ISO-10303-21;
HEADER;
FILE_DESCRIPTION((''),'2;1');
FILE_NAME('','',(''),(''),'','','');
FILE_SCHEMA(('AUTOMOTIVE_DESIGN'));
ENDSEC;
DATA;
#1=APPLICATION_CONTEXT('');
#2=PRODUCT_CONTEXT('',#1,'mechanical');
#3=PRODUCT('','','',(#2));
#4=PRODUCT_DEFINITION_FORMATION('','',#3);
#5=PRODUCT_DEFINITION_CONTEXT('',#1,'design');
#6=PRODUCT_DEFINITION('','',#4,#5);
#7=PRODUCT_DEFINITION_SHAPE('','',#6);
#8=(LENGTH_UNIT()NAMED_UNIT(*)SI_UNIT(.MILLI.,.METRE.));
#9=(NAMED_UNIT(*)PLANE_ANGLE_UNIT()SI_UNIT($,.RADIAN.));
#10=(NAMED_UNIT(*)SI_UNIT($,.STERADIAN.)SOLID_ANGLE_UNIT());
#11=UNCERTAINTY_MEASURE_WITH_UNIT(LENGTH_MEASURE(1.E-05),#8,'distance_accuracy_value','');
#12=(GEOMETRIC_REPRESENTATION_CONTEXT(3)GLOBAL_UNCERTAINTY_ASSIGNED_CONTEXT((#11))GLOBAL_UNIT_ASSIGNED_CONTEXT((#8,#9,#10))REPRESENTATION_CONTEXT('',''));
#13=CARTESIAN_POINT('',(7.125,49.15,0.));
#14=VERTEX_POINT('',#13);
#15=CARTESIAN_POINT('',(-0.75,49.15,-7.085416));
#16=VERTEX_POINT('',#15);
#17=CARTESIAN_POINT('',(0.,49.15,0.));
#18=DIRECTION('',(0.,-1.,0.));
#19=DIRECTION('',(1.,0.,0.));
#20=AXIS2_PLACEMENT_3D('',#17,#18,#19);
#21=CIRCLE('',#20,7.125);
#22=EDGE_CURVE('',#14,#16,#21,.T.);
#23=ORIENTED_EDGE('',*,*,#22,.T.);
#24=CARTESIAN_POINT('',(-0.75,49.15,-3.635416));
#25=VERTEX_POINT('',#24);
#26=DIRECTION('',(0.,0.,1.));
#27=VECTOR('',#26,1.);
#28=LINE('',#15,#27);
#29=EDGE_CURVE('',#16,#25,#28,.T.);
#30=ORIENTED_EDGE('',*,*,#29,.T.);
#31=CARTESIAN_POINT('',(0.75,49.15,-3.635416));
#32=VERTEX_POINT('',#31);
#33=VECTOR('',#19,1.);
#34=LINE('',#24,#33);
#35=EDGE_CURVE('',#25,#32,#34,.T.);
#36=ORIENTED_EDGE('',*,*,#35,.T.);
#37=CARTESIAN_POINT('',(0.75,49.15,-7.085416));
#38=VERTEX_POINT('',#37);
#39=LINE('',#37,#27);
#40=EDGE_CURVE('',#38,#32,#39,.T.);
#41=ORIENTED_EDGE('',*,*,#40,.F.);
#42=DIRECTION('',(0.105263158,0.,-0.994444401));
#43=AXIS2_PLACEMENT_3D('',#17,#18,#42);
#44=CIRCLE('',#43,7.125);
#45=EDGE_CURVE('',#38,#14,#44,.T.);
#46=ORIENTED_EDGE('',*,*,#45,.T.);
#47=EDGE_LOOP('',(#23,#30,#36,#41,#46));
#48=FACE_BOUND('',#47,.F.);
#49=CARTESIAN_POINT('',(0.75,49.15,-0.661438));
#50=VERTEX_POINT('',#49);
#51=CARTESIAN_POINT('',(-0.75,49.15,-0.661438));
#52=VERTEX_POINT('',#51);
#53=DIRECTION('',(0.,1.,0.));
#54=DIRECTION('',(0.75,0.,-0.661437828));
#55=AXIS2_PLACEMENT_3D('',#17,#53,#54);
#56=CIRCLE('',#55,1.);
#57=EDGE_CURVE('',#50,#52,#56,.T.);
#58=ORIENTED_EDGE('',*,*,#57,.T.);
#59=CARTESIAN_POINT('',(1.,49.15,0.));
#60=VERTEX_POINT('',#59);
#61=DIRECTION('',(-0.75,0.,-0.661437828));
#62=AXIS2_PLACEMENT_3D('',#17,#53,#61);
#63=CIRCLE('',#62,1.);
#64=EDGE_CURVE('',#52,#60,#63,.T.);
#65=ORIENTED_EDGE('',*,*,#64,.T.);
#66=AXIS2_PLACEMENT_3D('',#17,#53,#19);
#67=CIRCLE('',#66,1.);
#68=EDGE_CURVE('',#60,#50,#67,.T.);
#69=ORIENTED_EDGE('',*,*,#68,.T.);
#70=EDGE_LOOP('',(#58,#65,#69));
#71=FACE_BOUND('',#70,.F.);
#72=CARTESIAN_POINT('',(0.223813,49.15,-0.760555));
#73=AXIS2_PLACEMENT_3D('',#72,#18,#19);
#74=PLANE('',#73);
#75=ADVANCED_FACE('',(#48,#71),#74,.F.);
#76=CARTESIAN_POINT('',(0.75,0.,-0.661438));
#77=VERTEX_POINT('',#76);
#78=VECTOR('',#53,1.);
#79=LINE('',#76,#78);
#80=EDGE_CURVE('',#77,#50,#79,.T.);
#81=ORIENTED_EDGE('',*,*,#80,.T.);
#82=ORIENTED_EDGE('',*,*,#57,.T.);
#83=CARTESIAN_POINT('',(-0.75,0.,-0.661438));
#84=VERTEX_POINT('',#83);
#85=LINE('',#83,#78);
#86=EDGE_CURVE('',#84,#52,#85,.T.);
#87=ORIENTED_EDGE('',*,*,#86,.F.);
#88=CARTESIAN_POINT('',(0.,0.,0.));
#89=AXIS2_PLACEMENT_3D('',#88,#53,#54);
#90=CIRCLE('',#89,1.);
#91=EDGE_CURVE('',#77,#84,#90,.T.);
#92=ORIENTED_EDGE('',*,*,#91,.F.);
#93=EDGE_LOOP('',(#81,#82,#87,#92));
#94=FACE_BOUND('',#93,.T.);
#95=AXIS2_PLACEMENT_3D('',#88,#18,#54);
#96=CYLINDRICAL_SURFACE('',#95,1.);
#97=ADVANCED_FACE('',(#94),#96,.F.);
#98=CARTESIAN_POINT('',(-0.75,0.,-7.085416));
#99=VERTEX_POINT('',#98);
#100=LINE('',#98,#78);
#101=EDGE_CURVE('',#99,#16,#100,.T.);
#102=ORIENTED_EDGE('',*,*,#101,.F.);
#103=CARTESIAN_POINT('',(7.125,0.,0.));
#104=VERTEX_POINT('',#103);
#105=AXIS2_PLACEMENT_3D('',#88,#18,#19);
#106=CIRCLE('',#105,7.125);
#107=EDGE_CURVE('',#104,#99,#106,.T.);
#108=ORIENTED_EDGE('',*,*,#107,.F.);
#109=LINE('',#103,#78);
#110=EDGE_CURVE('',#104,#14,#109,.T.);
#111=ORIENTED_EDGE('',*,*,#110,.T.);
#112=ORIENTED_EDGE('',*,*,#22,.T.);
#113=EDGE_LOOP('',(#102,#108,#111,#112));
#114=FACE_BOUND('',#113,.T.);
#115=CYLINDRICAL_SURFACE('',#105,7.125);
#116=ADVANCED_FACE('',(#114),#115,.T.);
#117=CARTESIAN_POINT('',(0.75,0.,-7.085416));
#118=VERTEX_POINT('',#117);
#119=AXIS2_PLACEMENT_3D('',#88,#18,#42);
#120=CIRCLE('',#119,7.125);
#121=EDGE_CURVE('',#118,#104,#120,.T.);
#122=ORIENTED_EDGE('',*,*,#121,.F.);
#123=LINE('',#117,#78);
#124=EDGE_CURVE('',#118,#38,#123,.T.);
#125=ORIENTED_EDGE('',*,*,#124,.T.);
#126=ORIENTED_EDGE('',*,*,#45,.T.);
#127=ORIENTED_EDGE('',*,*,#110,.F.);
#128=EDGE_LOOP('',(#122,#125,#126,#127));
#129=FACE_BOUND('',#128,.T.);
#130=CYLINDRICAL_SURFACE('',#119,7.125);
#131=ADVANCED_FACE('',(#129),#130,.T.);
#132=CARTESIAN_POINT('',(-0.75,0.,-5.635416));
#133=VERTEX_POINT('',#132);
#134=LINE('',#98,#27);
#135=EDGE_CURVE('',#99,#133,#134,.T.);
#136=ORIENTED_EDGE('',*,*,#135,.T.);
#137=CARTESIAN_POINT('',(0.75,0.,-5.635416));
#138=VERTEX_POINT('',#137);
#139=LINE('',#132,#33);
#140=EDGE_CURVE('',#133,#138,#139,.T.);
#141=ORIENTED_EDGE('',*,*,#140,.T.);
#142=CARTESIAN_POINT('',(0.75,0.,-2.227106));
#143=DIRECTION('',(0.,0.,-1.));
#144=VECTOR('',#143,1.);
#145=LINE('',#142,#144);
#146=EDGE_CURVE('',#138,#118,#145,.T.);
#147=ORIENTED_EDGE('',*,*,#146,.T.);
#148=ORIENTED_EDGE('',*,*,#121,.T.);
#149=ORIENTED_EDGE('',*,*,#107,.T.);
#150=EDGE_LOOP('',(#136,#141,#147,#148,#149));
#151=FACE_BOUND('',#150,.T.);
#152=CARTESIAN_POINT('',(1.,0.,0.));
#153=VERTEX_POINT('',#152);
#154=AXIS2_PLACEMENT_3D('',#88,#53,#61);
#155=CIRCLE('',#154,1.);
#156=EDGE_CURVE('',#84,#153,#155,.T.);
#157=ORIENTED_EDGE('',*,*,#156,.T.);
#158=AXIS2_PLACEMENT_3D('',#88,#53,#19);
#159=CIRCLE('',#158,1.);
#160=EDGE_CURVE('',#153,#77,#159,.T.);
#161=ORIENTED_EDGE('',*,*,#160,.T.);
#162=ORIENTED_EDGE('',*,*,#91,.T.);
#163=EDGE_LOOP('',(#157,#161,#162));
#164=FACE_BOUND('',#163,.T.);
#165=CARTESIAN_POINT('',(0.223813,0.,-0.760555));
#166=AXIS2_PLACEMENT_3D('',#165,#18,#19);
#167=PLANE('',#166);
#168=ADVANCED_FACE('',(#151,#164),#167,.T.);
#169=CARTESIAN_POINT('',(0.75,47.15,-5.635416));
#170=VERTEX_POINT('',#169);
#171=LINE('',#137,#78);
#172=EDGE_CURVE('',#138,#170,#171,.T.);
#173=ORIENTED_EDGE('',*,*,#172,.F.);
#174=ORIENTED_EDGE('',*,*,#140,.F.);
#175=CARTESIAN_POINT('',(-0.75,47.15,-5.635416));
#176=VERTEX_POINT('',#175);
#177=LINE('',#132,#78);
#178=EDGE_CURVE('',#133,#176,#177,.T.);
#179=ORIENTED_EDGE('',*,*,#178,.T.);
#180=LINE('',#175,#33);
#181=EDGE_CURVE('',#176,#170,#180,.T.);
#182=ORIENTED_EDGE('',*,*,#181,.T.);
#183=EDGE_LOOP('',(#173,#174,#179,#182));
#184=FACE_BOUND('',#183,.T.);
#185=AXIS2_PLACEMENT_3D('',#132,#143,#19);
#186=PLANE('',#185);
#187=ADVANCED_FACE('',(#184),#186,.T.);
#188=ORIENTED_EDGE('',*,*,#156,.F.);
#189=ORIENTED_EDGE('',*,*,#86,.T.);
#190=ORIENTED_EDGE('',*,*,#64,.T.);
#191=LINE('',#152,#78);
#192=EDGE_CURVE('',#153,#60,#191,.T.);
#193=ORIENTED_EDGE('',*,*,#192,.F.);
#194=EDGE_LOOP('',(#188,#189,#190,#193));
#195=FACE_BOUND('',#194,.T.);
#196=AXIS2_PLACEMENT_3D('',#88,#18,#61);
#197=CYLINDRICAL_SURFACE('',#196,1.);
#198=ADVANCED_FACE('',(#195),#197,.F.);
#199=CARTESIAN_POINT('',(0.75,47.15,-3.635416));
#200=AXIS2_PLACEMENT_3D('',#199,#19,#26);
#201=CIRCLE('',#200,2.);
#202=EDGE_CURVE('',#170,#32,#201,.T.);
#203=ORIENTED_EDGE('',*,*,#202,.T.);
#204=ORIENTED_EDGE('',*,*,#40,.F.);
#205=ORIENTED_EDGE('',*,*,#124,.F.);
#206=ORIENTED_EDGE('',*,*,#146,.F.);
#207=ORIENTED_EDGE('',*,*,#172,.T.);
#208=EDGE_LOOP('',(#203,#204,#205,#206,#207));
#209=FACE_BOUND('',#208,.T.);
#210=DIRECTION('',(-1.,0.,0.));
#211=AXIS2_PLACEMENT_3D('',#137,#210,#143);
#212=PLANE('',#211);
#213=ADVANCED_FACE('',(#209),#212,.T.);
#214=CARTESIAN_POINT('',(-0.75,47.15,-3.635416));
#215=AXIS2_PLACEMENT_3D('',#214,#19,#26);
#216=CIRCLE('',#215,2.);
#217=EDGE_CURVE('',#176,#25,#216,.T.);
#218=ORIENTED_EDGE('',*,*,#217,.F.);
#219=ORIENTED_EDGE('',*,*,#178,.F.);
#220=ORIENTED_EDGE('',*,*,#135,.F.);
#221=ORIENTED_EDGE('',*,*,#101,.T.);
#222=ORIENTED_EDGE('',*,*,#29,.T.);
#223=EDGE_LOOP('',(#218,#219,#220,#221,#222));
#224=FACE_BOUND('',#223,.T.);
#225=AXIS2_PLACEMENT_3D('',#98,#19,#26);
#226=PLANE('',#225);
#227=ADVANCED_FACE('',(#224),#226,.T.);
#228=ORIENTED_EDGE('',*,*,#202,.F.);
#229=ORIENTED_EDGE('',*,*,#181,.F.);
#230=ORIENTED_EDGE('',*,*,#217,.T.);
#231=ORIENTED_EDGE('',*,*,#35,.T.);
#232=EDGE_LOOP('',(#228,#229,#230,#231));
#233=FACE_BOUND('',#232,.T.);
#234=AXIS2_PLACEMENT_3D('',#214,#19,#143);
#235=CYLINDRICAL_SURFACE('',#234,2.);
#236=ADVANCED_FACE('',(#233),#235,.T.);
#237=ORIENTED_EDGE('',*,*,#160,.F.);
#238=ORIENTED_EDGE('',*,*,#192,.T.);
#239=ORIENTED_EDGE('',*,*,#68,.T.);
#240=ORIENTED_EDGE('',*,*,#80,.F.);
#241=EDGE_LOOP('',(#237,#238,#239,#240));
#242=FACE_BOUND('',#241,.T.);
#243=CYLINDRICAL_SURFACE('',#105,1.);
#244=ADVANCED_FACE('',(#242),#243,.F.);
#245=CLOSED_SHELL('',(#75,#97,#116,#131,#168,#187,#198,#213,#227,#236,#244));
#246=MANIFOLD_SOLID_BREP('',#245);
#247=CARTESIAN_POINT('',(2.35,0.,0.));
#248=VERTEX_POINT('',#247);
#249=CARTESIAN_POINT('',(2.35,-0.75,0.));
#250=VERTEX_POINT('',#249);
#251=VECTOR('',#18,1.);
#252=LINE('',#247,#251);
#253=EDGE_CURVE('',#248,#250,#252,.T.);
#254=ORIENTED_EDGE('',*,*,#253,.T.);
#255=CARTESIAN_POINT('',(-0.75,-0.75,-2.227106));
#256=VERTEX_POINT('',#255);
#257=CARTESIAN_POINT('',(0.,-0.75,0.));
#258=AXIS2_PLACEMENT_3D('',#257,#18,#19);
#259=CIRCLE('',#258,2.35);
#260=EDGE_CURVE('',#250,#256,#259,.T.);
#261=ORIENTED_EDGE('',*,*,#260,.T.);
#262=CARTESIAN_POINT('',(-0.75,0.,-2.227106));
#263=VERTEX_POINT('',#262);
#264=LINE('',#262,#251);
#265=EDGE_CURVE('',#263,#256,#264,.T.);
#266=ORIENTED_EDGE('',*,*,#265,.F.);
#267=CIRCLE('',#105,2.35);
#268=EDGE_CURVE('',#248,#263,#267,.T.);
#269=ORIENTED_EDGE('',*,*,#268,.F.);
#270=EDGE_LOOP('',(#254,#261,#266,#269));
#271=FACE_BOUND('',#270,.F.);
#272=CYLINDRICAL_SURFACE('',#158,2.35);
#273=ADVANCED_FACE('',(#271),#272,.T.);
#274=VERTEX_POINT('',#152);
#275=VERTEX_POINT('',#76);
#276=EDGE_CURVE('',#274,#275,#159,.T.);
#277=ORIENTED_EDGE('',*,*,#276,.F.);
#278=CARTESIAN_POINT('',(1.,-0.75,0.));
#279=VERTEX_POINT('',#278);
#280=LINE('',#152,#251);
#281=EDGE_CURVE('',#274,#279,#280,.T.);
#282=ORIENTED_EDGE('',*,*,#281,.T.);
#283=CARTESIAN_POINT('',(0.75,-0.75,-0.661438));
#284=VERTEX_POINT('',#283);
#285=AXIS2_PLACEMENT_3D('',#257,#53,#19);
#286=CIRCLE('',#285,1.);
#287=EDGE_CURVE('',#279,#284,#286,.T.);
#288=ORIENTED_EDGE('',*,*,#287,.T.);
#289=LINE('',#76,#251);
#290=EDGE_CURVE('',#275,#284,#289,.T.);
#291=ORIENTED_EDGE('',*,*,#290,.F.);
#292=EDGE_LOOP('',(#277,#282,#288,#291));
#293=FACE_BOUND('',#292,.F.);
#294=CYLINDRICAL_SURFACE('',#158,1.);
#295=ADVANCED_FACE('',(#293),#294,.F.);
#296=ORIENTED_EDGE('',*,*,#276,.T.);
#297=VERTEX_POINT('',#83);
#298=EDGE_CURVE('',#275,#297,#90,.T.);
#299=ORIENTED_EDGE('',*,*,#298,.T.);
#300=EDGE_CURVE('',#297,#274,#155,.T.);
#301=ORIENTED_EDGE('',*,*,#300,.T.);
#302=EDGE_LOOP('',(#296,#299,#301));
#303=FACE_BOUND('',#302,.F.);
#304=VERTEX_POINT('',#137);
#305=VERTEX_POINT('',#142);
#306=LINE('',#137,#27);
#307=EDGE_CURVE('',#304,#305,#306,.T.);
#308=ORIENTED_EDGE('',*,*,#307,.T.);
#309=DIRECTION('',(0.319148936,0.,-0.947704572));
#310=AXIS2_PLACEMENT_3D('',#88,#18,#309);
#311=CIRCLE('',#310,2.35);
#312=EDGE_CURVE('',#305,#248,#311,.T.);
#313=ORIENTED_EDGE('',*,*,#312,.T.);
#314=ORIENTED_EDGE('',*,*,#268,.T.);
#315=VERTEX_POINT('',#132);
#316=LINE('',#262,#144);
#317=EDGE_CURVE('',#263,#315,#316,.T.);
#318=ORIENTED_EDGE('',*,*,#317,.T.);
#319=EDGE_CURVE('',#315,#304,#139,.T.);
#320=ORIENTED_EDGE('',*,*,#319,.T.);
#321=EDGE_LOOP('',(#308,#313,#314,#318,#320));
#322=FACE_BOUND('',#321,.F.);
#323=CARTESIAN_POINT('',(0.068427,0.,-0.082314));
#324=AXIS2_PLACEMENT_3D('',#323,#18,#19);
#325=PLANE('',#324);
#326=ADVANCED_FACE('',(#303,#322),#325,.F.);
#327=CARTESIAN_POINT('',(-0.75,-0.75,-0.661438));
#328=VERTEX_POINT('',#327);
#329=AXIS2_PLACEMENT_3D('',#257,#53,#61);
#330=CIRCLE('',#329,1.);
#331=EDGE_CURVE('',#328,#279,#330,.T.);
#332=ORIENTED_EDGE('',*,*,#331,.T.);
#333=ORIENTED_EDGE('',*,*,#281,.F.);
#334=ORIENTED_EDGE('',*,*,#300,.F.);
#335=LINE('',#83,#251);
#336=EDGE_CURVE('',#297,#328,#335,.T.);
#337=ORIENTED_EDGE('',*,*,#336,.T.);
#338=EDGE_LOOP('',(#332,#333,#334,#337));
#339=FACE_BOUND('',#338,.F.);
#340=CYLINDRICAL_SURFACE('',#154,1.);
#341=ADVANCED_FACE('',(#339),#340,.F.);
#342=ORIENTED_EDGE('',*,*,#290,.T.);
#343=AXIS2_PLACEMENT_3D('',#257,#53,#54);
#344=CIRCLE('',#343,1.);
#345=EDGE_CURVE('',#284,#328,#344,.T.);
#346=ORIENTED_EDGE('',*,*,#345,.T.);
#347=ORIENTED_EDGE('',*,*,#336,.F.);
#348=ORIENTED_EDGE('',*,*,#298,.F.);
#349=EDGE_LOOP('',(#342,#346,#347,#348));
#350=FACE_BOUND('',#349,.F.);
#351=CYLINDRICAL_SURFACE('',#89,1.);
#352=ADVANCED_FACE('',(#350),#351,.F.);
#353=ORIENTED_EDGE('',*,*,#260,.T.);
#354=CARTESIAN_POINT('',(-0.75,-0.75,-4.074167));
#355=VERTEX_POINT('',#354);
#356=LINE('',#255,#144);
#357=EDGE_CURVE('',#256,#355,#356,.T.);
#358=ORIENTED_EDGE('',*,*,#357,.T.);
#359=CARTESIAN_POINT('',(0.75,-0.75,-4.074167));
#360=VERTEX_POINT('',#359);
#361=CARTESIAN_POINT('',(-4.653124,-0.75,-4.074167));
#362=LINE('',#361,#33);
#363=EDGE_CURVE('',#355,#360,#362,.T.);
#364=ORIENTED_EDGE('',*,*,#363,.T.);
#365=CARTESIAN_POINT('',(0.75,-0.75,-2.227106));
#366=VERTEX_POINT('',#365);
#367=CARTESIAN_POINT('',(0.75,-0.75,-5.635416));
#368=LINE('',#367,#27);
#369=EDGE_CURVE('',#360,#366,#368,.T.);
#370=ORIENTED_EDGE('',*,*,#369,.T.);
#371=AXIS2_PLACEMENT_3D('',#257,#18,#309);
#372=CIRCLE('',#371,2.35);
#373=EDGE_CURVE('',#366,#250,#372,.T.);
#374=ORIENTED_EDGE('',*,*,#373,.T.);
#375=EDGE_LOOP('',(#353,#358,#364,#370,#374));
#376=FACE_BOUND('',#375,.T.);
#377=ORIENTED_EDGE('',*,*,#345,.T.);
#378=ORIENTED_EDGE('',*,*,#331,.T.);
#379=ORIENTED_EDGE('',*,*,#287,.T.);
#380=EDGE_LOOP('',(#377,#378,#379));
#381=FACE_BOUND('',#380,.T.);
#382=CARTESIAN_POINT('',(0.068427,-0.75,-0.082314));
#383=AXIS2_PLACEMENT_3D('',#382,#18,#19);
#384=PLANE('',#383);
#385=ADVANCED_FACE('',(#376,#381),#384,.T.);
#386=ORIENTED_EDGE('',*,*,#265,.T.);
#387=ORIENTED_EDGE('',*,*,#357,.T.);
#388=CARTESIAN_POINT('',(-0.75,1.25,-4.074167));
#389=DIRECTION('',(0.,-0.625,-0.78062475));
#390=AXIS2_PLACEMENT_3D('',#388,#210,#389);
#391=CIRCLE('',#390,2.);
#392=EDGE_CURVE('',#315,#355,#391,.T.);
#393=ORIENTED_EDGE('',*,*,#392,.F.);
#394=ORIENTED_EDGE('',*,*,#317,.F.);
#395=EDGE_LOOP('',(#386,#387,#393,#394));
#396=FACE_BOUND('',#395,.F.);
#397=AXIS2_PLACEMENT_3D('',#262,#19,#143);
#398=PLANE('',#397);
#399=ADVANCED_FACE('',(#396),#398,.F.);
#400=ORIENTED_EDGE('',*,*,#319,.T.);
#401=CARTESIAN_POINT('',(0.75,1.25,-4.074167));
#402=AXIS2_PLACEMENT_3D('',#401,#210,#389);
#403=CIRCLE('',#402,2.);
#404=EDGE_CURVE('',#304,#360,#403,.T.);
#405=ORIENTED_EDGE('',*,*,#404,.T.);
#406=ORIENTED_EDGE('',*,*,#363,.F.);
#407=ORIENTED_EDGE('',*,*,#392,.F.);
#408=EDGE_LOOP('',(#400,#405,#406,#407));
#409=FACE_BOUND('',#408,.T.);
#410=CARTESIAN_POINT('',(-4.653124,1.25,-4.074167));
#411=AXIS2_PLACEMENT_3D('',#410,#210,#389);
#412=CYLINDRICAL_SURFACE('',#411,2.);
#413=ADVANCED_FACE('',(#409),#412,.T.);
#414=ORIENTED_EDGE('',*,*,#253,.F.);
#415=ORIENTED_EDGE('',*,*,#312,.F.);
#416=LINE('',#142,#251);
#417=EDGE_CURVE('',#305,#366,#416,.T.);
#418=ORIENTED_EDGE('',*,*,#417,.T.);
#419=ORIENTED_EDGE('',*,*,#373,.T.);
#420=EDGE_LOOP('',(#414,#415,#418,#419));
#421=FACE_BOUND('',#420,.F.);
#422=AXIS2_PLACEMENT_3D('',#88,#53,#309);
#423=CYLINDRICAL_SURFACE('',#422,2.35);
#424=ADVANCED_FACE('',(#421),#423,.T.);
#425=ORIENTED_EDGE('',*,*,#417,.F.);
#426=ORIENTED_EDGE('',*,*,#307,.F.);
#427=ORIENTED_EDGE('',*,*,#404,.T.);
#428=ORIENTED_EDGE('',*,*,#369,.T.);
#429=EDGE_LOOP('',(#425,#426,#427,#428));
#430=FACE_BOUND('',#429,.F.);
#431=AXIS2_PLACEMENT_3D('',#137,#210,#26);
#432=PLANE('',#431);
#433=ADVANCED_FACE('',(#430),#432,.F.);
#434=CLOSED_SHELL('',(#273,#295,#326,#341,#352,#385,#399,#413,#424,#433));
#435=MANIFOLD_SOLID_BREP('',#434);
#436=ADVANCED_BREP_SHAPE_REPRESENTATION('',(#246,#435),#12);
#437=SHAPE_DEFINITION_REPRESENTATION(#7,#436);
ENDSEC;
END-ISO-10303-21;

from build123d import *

# Parameters (mm, degrees)
F1_DEPTH    = 49.15
F2_DEPTH    = 0.75
F3_T1_DEPTH = 9.306247498
F4_R        = 2


# Not quite as in the source:
# - a fillet or chamfer that OpenCascade refuses, or shapes differently, is made with other operations: its cross-section is extruded or revolved along the edge and cut away or added


with BuildPart() as f1:
    # F0 (on Front) → F1 (new body)
    with BuildSketch(Plane.XZ):
        with BuildLine():
            ThreePointArc((0.75, -7.0854163604), (5.2966675844, -4.7655993852), (7.125, 0))
            ThreePointArc((7.125, 0), (-4.7655993852, 5.2966675844), (-0.75, -7.0854163604))
            Line((-0.75, -7.0854163604), (-0.75, -5.6354163604))
            Line((-0.75, -5.6354163604), (-0.75, -2.2271057451))
            ThreePointArc((-0.75, -2.2271057451), (-1.3711309201, 1.9085334684), (2.35, 0))
            ThreePointArc((2.35, 0), (1.9085334684, -1.3711309201), (0.75, -2.2271057451))
            Line((0.75, -2.2271057451), (0.75, -5.6354163604))
            Line((0.75, -5.6354163604), (0.75, -7.0854163604))
        make_face()
        with BuildLine():
            Line((-0.75, -2.2271057451), (-0.75, -5.6354163604))
            Line((-0.75, -5.6354163604), (0.75, -5.6354163604))
            Line((0.75, -5.6354163604), (0.75, -2.2271057451))
            ThreePointArc((0.75, -2.2271057451), (0, -2.35), (-0.75, -2.2271057451))
        make_face()
        with BuildLine():
            ThreePointArc((2.35, 0), (-1.3711309201, 1.9085334684), (-0.75, -2.2271057451))
            Line((-0.75, -2.2271057451), (-0.75, -0.6614378278))
            ThreePointArc((-0.75, -0.6614378278), (-0.3535533906, 0.9354143467), (1, 0))
            ThreePointArc((1, 0), (0.9354143467, -0.3535533906), (0.75, -0.6614378278))
            Line((0.75, -0.6614378278), (0.75, -2.2271057451))
            ThreePointArc((0.75, -2.2271057451), (1.9085334684, -1.3711309201), (2.35, 0))
        make_face()
        with BuildLine():
            Line((-0.75, -0.6614378278), (-0.75, -2.2271057451))
            ThreePointArc((-0.75, -2.2271057451), (0, -2.35), (0.75, -2.2271057451))
            Line((0.75, -2.2271057451), (0.75, -0.6614378278))
            ThreePointArc((0.75, -0.6614378278), (0, -1), (-0.75, -0.6614378278))
        make_face()
    extrude(amount=-F1_DEPTH)

    # F4
    f4_edges = [f1.edges().sort_by_distance(p)[0] for p in [
        (0, 49.15, -5.635416),
    ]]
    fillet(f4_edges, radius=F4_R)


with BuildPart() as f2:
    # F0 (on Front) → F2 (new body)
    with BuildSketch(Plane.XZ):
        with BuildLine():
            ThreePointArc((2.35, 0), (-1.3711309201, 1.9085334684), (-0.75, -2.2271057451))
            Line((-0.75, -2.2271057451), (-0.75, -0.6614378278))
            ThreePointArc((-0.75, -0.6614378278), (-0.3535533906, 0.9354143467), (1, 0))
            ThreePointArc((1, 0), (0.9354143467, -0.3535533906), (0.75, -0.6614378278))
            Line((0.75, -0.6614378278), (0.75, -2.2271057451))
            ThreePointArc((0.75, -2.2271057451), (1.9085334684, -1.3711309201), (2.35, 0))
        make_face()
        with BuildLine():
            Line((-0.75, -0.6614378278), (-0.75, -2.2271057451))
            ThreePointArc((-0.75, -2.2271057451), (0, -2.35), (0.75, -2.2271057451))
            Line((0.75, -2.2271057451), (0.75, -0.6614378278))
            ThreePointArc((0.75, -0.6614378278), (0, -1), (-0.75, -0.6614378278))
        make_face()
        with BuildLine():
            Line((-0.75, -2.2271057451), (-0.75, -5.6354163604))
            Line((-0.75, -5.6354163604), (0.75, -5.6354163604))
            Line((0.75, -5.6354163604), (0.75, -2.2271057451))
            ThreePointArc((0.75, -2.2271057451), (0, -2.35), (-0.75, -2.2271057451))
        make_face()
    extrude(amount=F2_DEPTH)

    # F3: fillet of radius 2 on 1 edges, made by hand

    # F3_s2 → F3_t1 (cut)
    with BuildSketch(Plane.YZ.offset(-4.653123749)):
        with BuildLine():
            ThreePointArc((0, -5.6354163604), (-0.5527756377, -4.9401922646), (-0.75, -4.0741668608))
            Line((-0.75, -4.0741668608), (-0.75, -5.6354163604))
            Line((-0.75, -5.6354163604), (0, -5.6354163604))
        make_face()
    extrude(amount=F3_T1_DEPTH, mode=Mode.SUBTRACT)


solid = Compound([f1.part, f2.part])
